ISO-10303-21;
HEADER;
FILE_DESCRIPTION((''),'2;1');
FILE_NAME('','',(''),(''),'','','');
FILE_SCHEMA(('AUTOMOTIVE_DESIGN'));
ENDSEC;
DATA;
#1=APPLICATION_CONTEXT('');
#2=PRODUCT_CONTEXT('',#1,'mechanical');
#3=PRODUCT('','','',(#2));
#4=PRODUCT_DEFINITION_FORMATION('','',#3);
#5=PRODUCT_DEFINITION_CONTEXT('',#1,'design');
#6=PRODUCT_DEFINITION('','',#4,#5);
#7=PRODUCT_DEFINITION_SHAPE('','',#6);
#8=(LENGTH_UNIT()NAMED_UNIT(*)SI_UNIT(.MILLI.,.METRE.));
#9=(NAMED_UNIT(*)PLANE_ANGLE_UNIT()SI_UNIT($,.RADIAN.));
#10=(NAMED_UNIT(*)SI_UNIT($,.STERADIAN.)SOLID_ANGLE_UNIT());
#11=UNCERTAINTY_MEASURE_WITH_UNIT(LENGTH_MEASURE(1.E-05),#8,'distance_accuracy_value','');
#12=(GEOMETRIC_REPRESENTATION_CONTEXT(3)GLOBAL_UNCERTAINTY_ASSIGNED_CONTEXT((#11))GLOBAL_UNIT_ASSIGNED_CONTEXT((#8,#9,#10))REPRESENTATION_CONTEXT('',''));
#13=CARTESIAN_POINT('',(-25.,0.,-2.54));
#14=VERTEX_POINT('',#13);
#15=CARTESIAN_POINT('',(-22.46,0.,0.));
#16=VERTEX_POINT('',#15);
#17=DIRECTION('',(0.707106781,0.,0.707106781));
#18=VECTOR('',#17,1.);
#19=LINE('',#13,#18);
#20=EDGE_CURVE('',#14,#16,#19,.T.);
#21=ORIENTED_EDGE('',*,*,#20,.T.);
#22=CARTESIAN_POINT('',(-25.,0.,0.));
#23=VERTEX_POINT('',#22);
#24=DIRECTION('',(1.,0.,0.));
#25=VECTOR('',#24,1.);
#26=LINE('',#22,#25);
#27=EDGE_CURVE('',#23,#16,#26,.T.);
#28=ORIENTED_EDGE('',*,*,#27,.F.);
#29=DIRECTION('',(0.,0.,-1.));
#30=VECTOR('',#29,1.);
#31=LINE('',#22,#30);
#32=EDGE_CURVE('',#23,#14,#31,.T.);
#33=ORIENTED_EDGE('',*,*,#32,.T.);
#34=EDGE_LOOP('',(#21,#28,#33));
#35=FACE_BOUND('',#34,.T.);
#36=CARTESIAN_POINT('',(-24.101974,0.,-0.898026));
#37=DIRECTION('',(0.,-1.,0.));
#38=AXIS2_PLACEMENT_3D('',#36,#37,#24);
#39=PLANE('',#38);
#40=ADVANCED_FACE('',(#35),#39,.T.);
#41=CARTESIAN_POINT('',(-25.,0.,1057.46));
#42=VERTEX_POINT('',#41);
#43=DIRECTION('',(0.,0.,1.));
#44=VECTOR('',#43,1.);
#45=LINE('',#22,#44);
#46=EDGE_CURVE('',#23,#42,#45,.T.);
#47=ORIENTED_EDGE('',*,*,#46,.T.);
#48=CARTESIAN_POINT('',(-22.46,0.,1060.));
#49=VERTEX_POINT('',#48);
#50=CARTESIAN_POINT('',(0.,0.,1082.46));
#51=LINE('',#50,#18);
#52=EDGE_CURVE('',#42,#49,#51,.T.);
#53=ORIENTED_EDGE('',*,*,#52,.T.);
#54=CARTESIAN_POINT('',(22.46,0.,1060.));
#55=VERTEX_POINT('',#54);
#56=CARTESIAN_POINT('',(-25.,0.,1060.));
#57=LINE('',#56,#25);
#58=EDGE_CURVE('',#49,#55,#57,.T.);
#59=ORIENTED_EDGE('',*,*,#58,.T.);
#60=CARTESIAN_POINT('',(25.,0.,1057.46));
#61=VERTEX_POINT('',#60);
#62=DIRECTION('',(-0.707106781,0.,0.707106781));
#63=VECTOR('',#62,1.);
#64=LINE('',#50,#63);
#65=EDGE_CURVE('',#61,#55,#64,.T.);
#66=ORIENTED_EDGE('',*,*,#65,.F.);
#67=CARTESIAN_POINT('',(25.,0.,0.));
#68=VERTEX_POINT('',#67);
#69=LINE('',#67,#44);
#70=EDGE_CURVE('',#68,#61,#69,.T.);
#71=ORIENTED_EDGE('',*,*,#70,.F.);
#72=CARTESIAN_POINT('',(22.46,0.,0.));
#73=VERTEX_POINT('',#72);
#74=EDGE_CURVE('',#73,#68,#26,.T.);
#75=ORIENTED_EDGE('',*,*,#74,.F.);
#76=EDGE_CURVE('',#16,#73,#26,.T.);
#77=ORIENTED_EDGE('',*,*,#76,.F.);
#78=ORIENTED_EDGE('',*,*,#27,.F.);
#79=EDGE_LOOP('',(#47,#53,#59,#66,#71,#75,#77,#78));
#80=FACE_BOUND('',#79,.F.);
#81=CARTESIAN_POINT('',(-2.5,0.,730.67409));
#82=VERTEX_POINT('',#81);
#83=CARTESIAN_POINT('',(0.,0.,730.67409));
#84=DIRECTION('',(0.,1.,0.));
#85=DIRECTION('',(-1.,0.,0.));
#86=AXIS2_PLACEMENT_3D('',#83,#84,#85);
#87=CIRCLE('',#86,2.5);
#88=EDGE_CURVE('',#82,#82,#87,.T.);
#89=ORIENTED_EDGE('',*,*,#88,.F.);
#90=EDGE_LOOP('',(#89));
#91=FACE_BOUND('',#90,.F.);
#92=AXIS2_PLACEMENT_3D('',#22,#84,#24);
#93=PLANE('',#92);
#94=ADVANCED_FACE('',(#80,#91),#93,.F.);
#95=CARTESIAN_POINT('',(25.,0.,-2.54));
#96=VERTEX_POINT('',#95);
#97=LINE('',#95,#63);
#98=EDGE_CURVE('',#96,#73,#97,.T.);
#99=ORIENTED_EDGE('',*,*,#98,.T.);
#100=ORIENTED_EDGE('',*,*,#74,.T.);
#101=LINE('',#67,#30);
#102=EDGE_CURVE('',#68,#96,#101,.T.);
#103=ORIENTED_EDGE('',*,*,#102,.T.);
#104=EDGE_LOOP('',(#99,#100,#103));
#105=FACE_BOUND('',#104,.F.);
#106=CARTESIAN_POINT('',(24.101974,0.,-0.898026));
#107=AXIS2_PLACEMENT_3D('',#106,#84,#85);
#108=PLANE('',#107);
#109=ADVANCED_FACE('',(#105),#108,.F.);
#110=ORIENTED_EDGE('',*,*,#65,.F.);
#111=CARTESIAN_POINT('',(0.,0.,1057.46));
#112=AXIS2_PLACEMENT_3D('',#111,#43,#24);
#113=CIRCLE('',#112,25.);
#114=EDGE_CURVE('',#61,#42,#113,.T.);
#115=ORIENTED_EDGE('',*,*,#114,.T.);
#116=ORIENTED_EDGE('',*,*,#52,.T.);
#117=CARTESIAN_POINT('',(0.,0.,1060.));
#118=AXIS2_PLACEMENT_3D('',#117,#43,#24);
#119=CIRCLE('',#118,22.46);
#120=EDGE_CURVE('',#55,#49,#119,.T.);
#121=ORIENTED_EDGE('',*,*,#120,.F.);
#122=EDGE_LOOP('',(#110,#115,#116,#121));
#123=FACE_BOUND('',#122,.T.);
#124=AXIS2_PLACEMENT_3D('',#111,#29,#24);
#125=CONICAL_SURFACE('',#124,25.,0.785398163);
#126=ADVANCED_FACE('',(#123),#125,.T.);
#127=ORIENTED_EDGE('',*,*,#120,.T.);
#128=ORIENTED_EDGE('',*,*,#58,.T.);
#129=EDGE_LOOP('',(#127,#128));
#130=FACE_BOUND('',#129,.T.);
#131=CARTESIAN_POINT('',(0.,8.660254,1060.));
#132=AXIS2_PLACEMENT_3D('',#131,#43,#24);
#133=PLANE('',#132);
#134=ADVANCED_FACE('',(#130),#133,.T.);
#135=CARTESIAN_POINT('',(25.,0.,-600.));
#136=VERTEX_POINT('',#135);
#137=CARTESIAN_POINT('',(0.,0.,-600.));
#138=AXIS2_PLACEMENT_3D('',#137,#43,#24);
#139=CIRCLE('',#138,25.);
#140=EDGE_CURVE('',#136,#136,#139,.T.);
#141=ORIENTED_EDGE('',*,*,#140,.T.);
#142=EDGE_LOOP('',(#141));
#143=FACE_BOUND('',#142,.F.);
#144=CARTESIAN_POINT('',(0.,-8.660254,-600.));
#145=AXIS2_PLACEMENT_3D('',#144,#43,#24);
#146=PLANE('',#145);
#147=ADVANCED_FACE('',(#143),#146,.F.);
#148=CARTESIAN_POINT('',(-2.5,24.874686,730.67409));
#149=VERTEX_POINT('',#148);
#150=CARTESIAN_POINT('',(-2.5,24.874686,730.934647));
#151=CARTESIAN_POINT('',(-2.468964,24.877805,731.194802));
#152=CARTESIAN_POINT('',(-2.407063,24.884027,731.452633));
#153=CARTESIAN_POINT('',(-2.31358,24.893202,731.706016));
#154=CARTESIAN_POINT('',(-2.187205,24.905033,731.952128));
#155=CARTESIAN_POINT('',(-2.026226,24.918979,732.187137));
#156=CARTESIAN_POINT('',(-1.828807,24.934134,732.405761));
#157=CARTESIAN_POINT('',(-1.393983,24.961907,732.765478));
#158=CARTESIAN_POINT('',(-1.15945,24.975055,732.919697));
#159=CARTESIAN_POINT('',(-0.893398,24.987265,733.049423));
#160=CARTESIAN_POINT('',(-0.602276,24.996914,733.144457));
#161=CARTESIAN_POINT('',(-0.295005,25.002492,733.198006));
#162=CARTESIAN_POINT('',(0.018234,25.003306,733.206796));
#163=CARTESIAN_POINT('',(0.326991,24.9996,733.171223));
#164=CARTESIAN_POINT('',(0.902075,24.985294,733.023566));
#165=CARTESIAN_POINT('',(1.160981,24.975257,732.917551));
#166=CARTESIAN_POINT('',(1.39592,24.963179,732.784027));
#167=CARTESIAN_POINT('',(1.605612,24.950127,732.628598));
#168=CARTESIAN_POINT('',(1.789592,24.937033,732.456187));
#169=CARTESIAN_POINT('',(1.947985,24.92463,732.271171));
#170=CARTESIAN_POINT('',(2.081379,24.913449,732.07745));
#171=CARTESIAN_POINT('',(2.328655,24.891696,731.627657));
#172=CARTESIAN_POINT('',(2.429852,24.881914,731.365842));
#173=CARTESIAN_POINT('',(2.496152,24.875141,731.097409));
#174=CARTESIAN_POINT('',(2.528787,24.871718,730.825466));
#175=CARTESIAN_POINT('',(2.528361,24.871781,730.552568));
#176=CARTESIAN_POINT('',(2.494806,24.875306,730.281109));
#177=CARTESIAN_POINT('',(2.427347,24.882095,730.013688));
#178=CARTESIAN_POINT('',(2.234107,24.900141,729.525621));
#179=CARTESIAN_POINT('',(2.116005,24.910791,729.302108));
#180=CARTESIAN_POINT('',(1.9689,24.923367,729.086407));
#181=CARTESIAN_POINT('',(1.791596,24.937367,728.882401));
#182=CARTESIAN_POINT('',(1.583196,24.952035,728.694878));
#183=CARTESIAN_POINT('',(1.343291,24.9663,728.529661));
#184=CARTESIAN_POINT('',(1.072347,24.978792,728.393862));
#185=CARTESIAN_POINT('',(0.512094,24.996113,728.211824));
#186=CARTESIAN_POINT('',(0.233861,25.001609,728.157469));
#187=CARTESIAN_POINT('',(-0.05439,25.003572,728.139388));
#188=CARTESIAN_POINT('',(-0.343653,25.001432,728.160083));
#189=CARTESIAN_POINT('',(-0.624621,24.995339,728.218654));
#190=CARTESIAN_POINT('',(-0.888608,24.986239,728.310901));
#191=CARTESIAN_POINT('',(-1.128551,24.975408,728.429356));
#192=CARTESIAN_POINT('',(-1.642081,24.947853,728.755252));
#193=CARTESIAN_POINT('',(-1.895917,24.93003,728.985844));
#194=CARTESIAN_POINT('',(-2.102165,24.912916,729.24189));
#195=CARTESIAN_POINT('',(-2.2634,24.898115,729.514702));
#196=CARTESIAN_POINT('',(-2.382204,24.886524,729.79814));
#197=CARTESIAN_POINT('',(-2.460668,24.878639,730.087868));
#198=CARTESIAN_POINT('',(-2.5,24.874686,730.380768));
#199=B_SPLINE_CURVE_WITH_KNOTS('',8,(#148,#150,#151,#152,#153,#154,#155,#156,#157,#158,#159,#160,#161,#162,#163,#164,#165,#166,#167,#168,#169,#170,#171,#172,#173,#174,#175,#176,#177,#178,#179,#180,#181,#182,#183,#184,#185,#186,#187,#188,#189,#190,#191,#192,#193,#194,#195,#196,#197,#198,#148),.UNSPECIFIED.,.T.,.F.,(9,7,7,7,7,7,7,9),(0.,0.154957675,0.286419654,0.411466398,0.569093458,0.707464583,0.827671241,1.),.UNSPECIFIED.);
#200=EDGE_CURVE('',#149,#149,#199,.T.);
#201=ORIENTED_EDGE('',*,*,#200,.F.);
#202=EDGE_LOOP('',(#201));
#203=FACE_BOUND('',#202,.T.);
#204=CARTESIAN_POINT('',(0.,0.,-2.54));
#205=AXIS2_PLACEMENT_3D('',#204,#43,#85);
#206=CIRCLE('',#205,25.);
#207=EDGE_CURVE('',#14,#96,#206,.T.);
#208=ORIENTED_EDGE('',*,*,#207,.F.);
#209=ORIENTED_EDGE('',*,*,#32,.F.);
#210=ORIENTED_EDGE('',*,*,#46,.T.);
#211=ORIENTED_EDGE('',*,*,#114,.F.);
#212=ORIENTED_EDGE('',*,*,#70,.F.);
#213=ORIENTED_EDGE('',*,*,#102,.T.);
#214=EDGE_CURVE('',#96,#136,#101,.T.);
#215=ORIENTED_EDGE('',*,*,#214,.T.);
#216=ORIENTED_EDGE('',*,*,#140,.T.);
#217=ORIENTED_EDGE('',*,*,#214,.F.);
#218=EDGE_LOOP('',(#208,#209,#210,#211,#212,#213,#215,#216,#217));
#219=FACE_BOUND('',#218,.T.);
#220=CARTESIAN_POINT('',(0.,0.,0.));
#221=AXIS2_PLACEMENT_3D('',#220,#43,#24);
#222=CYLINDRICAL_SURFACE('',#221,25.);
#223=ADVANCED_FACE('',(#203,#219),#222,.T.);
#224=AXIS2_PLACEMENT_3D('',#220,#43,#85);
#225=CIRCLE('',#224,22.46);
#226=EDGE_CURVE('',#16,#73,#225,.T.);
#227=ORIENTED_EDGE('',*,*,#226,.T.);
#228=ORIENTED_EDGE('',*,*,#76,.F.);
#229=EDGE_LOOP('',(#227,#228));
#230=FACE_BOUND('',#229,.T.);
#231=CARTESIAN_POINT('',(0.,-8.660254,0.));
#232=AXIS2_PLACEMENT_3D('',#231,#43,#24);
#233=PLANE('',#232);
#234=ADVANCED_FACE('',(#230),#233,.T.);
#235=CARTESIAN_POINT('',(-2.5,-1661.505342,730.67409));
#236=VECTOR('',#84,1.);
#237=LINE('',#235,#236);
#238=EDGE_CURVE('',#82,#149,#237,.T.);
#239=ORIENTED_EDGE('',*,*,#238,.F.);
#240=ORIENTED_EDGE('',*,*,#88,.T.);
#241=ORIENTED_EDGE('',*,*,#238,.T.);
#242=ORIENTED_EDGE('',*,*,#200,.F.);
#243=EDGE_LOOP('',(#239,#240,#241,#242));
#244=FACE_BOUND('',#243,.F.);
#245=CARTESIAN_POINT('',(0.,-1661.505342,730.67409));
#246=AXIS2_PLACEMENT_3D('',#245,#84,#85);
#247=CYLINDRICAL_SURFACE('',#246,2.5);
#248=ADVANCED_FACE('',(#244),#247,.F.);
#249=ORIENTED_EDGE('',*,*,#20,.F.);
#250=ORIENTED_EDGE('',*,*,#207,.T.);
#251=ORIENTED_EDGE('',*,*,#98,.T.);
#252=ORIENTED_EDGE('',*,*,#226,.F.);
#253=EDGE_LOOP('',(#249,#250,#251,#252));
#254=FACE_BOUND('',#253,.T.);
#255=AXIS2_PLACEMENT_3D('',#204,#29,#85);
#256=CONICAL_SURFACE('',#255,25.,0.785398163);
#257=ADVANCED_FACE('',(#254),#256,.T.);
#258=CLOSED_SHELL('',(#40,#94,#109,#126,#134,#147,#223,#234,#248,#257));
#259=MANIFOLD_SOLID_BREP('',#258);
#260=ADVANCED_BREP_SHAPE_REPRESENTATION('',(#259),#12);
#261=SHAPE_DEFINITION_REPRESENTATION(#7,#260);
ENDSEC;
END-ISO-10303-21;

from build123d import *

# Parameters (mm, degrees)
F1_DEPTH    = 1060
F2_DEPTH    = 600
F3_T2_ANGLE = 180
F4_SIZE     = 2.54
F6_D        = 5


# Not quite as in the source:
# - a fillet or chamfer that OpenCascade refuses, or shapes differently, is made with other operations: its cross-section is extruded or revolved along the edge and cut away or added


with BuildPart() as f1:
    # F0 (on Top) → F1 (new body)
    with BuildSketch(Plane.XY):
        with BuildLine():
            Line((-25, 0), (25, 0))
            ThreePointArc((25, 0), (0, 25), (-25, 0))
        make_face()
    extrude(amount=F1_DEPTH)

    # F0 (on Top) → F2 (join)
    with BuildSketch(Plane.XY):
        with BuildLine():
            ThreePointArc((-25, 0), (0, -25), (25, 0))
            Line((25, 0), (-25, 0))
        make_face()
        with BuildLine():
            Line((-25, 0), (25, 0))
            ThreePointArc((25, 0), (0, 25), (-25, 0))
        make_face()
    extrude(amount=-F2_DEPTH)

    # F3: chamfer of 2.54 on 1 edges, made by hand

    # F3_s1 → F3_t2 (revolve, cut)
    with BuildSketch(Plane.XZ):
        Polygon((-25, -2.54), (-22.46, 0), (-25, 0), align=None)
    revolve(axis=Axis((0, 0, 0), (0, 0, 1)), revolution_arc=F3_T2_ANGLE, mode=Mode.SUBTRACT)

    # F4
    f4_edges = [f1.edges().sort_by_distance(p)[0] for p in [
        (0, 25, 1060),
    ]]
    chamfer(f4_edges, length=F4_SIZE)

    # F6 (through all)
    with Locations(Plane.XZ):
        with Locations((0, 730.6740903854)):
            Hole(F6_D / 2)


solid = f1.part
